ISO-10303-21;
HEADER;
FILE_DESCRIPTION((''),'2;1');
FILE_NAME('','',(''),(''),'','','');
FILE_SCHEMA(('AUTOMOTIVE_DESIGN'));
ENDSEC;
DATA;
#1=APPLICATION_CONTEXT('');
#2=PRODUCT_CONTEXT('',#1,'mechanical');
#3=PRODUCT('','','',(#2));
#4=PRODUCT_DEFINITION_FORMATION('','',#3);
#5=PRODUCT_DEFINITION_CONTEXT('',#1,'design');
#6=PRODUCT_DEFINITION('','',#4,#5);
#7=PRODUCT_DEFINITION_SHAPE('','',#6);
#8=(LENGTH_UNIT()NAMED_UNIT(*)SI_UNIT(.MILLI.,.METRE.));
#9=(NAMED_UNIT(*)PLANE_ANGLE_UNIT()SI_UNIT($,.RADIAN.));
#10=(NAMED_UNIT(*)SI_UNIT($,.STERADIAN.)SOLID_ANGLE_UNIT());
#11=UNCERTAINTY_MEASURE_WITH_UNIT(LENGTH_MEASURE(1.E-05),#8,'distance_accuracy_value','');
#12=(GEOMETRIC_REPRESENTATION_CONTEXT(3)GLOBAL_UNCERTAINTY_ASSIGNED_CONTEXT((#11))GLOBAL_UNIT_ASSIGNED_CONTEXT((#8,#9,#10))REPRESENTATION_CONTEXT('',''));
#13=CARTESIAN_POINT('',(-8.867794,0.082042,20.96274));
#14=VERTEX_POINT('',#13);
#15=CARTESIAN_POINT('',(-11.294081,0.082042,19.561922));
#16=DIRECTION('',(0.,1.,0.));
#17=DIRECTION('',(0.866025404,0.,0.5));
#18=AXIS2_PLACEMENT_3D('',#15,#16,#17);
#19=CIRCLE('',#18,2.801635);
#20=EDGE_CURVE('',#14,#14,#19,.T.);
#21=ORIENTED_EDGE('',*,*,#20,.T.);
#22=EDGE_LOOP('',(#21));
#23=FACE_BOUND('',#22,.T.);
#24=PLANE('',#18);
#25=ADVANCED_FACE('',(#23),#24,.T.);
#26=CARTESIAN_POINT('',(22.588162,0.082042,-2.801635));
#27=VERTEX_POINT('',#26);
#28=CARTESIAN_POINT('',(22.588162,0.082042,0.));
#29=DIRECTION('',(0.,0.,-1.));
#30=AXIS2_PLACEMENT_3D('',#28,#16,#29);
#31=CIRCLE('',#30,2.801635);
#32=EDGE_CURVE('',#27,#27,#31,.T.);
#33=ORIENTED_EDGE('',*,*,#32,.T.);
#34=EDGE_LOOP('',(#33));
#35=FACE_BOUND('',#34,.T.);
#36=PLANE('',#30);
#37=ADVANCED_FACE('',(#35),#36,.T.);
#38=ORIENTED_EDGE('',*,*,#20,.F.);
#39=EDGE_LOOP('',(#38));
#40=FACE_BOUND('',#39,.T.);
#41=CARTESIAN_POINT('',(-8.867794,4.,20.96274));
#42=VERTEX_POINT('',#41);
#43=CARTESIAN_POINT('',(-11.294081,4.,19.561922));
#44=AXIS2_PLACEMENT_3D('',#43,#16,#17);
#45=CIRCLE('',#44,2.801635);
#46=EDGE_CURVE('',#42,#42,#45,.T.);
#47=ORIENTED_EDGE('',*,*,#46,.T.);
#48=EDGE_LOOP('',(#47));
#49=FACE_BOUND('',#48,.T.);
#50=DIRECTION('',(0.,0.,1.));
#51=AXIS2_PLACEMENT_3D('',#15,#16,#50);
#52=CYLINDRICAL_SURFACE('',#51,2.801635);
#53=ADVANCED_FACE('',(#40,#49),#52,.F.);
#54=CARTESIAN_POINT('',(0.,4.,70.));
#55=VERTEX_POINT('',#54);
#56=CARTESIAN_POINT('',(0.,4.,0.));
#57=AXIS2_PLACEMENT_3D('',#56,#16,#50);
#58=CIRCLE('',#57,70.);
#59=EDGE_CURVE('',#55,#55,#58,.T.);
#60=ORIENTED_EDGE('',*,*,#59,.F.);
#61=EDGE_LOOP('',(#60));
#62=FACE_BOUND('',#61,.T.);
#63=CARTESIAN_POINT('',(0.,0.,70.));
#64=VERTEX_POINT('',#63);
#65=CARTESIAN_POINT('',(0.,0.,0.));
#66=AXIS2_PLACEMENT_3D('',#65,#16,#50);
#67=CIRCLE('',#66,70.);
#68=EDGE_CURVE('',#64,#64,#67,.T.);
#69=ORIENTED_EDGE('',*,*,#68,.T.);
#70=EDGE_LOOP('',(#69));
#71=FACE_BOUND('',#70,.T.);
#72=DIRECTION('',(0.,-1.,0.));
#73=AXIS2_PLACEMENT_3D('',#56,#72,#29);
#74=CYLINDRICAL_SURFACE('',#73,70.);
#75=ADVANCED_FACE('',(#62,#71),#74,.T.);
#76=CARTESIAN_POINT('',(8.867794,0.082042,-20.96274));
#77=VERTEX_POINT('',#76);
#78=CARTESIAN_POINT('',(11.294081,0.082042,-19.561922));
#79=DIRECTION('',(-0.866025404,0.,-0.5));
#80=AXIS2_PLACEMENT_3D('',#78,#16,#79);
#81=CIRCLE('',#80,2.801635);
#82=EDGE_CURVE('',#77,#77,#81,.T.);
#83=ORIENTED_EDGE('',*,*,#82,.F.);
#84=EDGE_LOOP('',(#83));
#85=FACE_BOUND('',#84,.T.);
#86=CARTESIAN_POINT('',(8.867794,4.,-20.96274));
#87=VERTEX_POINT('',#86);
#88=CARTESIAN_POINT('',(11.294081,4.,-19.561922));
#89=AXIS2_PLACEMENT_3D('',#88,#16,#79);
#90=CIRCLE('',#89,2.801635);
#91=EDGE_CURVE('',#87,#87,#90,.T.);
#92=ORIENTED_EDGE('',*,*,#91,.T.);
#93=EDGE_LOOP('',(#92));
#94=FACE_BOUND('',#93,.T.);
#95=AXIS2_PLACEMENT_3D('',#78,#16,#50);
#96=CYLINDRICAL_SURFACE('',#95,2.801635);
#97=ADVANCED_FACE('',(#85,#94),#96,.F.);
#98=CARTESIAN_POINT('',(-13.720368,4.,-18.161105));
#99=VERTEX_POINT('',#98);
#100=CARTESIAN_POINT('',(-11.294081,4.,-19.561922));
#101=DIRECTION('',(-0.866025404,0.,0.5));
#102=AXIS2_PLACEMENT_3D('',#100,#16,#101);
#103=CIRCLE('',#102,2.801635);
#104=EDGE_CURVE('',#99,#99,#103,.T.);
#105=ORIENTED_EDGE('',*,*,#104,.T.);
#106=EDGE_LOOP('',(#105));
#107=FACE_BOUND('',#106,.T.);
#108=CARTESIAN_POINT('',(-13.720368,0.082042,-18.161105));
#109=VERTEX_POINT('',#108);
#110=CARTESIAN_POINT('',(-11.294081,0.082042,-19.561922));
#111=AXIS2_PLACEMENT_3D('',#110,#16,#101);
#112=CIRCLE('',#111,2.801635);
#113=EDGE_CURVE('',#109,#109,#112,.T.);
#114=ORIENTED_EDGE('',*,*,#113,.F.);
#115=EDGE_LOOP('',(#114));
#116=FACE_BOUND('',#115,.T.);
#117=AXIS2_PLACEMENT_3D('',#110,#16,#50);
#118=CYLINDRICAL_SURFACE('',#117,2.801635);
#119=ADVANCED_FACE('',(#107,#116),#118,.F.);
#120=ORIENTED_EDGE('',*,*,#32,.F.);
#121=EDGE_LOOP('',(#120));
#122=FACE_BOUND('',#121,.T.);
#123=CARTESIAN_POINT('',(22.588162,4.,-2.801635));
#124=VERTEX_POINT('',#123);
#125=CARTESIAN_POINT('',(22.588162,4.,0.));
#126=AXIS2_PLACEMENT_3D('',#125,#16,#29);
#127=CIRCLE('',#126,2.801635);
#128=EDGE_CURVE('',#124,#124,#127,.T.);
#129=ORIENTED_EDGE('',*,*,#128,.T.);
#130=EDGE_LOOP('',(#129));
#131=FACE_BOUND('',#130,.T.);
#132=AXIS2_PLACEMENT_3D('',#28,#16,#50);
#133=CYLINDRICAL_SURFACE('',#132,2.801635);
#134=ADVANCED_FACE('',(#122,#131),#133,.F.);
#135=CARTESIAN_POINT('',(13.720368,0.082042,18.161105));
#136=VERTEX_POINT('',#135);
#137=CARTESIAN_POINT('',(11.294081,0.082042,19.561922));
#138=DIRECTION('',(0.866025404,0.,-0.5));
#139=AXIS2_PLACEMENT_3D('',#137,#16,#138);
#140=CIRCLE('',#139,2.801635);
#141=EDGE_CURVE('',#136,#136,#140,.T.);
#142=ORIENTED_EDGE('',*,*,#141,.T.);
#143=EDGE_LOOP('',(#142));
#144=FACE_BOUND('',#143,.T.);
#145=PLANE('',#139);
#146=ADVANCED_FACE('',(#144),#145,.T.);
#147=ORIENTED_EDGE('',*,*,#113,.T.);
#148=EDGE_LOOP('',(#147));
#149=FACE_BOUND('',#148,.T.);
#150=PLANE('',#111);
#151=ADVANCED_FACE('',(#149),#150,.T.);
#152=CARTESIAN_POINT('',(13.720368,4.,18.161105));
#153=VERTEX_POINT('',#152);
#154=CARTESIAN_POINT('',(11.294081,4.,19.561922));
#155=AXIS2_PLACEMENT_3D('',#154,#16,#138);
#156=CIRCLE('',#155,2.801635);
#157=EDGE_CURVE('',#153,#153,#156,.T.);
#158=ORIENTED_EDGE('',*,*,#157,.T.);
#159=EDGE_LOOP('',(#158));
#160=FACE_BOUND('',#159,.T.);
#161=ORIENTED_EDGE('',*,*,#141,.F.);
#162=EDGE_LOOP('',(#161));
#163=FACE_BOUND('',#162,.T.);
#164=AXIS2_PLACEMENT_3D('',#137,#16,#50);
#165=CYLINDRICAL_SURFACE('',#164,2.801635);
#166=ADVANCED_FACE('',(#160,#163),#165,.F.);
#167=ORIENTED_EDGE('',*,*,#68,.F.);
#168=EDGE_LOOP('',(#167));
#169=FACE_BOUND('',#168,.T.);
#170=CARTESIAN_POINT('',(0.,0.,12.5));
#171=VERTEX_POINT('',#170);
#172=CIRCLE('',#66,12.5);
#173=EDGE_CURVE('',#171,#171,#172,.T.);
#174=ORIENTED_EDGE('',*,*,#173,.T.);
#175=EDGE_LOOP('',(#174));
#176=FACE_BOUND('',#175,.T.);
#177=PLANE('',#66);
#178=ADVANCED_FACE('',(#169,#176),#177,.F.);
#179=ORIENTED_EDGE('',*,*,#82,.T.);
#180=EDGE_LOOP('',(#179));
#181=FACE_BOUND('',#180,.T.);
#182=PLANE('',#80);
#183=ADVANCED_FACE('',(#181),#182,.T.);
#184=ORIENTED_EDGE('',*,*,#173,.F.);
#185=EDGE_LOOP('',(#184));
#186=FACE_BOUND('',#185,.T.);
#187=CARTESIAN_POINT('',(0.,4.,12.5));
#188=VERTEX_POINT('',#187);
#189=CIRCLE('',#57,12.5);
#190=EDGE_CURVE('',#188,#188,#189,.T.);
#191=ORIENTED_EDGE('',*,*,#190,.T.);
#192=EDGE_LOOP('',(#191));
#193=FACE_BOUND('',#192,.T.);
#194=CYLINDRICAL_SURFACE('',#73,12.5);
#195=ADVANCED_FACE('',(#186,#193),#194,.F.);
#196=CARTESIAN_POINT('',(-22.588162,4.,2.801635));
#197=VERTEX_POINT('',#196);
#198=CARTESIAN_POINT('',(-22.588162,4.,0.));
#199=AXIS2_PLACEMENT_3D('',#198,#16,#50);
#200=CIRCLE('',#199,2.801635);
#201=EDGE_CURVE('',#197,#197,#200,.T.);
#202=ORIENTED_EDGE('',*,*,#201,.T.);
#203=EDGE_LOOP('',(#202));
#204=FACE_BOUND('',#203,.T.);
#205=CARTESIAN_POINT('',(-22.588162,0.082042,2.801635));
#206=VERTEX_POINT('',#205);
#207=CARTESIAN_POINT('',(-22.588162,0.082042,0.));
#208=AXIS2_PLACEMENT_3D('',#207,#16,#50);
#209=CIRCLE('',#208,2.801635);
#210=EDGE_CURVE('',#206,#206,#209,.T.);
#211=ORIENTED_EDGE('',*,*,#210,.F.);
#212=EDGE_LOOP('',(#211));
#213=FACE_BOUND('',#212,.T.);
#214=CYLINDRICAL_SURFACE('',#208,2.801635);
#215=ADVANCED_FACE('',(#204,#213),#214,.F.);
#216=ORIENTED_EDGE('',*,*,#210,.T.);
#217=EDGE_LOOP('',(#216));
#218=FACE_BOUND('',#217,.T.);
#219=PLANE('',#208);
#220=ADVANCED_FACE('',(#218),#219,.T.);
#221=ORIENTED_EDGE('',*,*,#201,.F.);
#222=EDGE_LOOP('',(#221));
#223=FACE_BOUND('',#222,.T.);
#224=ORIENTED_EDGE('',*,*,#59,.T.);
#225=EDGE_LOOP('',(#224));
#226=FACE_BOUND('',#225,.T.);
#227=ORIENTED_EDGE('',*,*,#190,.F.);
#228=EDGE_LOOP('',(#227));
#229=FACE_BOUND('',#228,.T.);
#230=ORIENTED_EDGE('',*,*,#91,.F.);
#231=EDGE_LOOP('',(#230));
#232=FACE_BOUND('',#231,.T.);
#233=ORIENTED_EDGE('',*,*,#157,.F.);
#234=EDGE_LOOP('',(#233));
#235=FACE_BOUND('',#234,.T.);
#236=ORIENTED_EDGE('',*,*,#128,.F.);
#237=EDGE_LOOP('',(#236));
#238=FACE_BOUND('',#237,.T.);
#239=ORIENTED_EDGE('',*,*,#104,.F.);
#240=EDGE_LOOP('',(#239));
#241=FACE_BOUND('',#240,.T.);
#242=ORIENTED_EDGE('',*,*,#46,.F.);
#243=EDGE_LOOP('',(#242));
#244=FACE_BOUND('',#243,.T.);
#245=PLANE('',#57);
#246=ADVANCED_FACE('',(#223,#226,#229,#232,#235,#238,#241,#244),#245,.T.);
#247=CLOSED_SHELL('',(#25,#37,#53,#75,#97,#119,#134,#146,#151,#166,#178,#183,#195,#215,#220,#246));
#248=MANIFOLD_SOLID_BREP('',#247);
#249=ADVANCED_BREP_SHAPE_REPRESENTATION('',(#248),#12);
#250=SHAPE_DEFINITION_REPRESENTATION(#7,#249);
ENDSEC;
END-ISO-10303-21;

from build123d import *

# Parameters (mm, degrees)
SKETCH1_R           = 70
BOSS_EXTRUDE1_DEPTH = 4
SKETCH2_R           = 12.5
CUT_EXTRUDE1_DEPTH  = 100.075728612
SKETCH3_R           = 2.801634806
CUT_EXTRUDE2_DEPTH  = 3.917957982
CIRPATTERN1_COUNT   = 6


with BuildPart() as part:
    # Sketch1 → Boss-Extrude1 (new body)
    with BuildSketch(Plane(origin=(0, 0, 0), x_dir=(1, 0, 0), z_dir=(0, 1, 0))):
        Circle(SKETCH1_R)
    extrude(amount=BOSS_EXTRUDE1_DEPTH)

    # Sketch2 → Cut-Extrude1 (cut, through all)
    with BuildSketch(Plane(origin=(0, 0, 0), x_dir=(1, 0, 0), z_dir=(0, 1, 0))):
        Circle(SKETCH2_R)
    extrude(amount=CUT_EXTRUDE1_DEPTH, mode=Mode.SUBTRACT)

    # Sketch3 → Cut-Extrude2 (cut)
    with BuildSketch(Plane(origin=(0, 4, 0), x_dir=(1, 0, 0), z_dir=(0, 1, 0))):
        with Locations((-22.588161984, 0)):
            Circle(SKETCH3_R)
    cut_extrude2 = extrude(amount=-CUT_EXTRUDE2_DEPTH, mode=Mode.SUBTRACT)

    # CirPattern1: Cut-Extrude2 ×6 about axis
    cirpattern1_axis = Axis((0, 0, 0), (0, 1, 0))
    for i in range(1, CIRPATTERN1_COUNT):
        add(cut_extrude2.rotate(cirpattern1_axis, i * 360 / CIRPATTERN1_COUNT), mode=Mode.SUBTRACT)


solid = part.part
